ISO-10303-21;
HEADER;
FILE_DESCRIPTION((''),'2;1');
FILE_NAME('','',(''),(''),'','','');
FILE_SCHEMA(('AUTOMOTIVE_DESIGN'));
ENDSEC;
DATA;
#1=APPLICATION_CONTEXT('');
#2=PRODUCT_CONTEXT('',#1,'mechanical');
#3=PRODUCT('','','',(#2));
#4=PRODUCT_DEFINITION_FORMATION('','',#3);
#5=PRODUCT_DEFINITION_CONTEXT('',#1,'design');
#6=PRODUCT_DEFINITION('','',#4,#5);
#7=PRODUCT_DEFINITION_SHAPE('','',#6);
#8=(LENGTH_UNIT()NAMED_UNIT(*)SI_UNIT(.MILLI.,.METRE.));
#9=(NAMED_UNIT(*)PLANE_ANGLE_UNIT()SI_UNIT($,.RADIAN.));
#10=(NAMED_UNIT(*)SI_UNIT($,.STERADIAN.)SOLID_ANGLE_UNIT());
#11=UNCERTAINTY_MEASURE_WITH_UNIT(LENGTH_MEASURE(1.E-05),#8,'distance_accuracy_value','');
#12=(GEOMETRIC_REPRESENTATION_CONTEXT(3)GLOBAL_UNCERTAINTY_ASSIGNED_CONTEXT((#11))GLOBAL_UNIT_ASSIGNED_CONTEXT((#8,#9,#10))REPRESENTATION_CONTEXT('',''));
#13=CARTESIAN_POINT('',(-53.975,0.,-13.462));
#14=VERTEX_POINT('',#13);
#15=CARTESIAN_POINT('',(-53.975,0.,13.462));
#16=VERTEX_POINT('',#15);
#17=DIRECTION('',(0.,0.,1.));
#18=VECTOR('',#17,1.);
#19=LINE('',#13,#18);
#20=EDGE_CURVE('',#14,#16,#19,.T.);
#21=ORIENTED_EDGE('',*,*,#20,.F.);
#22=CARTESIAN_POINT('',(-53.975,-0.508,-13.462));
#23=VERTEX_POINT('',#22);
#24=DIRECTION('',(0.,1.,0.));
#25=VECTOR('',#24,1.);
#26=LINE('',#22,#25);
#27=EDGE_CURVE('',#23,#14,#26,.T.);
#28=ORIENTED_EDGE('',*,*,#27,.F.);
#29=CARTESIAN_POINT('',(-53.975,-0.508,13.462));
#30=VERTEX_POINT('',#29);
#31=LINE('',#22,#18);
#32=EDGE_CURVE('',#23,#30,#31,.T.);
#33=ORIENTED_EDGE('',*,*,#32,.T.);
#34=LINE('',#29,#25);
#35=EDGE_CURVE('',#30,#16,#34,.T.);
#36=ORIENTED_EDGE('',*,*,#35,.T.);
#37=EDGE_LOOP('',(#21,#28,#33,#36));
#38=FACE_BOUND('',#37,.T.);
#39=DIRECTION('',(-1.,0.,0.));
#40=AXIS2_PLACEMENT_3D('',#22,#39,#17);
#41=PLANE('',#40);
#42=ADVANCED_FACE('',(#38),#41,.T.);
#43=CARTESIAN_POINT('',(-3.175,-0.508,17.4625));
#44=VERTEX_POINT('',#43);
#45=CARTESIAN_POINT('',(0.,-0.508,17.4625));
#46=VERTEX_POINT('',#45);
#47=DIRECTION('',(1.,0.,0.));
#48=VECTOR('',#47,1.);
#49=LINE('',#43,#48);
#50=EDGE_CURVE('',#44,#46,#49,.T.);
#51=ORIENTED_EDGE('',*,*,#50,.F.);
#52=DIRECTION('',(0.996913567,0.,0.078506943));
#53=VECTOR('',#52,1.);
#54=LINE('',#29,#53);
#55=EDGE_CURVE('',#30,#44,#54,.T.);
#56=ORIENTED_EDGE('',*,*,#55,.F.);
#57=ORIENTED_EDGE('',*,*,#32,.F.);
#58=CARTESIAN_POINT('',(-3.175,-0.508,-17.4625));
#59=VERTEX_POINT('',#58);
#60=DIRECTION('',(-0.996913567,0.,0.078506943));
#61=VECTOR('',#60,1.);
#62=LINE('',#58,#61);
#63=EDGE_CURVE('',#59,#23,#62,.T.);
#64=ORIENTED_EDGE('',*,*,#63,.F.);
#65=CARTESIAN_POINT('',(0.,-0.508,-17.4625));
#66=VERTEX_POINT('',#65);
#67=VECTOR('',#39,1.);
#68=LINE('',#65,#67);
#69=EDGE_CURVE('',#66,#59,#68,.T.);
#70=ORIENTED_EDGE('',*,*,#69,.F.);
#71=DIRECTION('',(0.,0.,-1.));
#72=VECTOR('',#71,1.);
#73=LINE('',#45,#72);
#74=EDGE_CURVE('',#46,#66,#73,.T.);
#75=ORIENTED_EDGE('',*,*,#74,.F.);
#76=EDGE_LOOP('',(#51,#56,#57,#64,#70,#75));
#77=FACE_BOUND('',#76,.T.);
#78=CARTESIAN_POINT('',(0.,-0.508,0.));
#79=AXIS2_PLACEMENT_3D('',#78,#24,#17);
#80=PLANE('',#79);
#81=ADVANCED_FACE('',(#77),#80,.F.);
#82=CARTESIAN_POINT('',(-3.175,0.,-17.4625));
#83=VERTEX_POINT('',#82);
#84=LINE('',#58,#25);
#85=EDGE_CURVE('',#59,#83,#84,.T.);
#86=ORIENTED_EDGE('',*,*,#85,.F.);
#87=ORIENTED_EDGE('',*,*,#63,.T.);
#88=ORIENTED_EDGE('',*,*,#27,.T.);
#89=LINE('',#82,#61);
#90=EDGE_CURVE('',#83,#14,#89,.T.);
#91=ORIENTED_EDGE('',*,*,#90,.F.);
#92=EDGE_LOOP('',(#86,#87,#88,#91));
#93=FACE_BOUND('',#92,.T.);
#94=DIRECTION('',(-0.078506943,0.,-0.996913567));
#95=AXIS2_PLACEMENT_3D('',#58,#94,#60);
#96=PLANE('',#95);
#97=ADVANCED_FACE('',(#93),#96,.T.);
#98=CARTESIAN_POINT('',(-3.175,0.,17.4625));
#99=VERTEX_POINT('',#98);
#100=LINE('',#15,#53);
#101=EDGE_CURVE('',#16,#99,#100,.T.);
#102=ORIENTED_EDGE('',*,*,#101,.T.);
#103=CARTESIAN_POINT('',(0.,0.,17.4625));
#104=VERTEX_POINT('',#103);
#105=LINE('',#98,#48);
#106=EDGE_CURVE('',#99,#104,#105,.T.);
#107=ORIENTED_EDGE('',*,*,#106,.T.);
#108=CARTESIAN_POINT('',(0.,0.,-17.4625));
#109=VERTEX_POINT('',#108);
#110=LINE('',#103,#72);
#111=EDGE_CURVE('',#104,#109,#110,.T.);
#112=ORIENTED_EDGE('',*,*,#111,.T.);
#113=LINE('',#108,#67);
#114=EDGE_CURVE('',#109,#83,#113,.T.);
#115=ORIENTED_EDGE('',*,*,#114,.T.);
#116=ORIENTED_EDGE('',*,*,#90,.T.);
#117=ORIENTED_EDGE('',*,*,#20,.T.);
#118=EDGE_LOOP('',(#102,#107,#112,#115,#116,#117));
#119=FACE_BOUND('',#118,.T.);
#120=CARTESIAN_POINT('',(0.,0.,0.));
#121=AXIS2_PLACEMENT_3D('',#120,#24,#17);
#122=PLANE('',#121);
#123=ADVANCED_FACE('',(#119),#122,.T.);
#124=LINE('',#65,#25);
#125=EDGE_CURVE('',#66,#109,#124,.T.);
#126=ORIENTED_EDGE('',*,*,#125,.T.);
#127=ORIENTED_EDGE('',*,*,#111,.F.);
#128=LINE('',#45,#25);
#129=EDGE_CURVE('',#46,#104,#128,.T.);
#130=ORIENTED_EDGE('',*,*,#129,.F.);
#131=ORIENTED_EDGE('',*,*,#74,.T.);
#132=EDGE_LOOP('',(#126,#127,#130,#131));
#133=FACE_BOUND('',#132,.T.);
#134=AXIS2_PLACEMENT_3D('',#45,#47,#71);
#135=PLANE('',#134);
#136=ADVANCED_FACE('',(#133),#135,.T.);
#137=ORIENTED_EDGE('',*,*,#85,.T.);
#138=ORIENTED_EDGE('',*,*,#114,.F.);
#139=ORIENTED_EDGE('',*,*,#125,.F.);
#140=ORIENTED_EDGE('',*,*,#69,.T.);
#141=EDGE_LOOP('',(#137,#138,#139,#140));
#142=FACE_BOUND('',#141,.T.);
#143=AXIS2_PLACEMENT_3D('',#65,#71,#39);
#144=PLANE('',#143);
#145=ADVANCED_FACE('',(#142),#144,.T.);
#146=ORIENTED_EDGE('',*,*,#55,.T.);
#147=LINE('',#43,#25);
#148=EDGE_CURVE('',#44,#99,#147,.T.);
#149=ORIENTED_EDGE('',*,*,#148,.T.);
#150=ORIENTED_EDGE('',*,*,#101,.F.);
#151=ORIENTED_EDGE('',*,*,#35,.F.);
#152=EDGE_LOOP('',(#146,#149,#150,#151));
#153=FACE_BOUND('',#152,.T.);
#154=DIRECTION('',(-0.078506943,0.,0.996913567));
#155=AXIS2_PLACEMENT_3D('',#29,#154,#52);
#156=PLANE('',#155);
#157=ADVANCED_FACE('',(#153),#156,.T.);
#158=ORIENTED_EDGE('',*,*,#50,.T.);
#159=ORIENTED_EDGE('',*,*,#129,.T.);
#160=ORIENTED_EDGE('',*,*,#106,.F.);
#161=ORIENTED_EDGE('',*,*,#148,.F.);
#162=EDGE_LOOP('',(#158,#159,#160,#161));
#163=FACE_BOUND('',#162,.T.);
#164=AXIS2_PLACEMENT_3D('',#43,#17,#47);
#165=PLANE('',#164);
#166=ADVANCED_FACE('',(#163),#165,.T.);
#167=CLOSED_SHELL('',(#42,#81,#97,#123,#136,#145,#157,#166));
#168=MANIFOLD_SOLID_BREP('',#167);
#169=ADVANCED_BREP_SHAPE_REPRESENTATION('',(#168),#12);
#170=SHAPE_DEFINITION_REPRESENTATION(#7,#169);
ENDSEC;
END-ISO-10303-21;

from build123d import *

# Parameters (mm, degrees)
BASE_FLANGE1_DEPTH = 0.508


# Sheet-metal steps are written as plain solids
with BuildPart() as part:
    # Sketch1 → Base-Flange1 (new body)
    with BuildSketch(Plane(origin=(0, 0, 0), x_dir=(1, 0, 0), z_dir=(0, 1, 0))):
        Polygon((0, -17.4625), (0, 17.4625), (-3.175, 17.4625), (-53.975, 13.462), (-53.975, -13.462), (-3.175, -17.4625), align=None)
    extrude(amount=-BASE_FLANGE1_DEPTH)


solid = part.part
